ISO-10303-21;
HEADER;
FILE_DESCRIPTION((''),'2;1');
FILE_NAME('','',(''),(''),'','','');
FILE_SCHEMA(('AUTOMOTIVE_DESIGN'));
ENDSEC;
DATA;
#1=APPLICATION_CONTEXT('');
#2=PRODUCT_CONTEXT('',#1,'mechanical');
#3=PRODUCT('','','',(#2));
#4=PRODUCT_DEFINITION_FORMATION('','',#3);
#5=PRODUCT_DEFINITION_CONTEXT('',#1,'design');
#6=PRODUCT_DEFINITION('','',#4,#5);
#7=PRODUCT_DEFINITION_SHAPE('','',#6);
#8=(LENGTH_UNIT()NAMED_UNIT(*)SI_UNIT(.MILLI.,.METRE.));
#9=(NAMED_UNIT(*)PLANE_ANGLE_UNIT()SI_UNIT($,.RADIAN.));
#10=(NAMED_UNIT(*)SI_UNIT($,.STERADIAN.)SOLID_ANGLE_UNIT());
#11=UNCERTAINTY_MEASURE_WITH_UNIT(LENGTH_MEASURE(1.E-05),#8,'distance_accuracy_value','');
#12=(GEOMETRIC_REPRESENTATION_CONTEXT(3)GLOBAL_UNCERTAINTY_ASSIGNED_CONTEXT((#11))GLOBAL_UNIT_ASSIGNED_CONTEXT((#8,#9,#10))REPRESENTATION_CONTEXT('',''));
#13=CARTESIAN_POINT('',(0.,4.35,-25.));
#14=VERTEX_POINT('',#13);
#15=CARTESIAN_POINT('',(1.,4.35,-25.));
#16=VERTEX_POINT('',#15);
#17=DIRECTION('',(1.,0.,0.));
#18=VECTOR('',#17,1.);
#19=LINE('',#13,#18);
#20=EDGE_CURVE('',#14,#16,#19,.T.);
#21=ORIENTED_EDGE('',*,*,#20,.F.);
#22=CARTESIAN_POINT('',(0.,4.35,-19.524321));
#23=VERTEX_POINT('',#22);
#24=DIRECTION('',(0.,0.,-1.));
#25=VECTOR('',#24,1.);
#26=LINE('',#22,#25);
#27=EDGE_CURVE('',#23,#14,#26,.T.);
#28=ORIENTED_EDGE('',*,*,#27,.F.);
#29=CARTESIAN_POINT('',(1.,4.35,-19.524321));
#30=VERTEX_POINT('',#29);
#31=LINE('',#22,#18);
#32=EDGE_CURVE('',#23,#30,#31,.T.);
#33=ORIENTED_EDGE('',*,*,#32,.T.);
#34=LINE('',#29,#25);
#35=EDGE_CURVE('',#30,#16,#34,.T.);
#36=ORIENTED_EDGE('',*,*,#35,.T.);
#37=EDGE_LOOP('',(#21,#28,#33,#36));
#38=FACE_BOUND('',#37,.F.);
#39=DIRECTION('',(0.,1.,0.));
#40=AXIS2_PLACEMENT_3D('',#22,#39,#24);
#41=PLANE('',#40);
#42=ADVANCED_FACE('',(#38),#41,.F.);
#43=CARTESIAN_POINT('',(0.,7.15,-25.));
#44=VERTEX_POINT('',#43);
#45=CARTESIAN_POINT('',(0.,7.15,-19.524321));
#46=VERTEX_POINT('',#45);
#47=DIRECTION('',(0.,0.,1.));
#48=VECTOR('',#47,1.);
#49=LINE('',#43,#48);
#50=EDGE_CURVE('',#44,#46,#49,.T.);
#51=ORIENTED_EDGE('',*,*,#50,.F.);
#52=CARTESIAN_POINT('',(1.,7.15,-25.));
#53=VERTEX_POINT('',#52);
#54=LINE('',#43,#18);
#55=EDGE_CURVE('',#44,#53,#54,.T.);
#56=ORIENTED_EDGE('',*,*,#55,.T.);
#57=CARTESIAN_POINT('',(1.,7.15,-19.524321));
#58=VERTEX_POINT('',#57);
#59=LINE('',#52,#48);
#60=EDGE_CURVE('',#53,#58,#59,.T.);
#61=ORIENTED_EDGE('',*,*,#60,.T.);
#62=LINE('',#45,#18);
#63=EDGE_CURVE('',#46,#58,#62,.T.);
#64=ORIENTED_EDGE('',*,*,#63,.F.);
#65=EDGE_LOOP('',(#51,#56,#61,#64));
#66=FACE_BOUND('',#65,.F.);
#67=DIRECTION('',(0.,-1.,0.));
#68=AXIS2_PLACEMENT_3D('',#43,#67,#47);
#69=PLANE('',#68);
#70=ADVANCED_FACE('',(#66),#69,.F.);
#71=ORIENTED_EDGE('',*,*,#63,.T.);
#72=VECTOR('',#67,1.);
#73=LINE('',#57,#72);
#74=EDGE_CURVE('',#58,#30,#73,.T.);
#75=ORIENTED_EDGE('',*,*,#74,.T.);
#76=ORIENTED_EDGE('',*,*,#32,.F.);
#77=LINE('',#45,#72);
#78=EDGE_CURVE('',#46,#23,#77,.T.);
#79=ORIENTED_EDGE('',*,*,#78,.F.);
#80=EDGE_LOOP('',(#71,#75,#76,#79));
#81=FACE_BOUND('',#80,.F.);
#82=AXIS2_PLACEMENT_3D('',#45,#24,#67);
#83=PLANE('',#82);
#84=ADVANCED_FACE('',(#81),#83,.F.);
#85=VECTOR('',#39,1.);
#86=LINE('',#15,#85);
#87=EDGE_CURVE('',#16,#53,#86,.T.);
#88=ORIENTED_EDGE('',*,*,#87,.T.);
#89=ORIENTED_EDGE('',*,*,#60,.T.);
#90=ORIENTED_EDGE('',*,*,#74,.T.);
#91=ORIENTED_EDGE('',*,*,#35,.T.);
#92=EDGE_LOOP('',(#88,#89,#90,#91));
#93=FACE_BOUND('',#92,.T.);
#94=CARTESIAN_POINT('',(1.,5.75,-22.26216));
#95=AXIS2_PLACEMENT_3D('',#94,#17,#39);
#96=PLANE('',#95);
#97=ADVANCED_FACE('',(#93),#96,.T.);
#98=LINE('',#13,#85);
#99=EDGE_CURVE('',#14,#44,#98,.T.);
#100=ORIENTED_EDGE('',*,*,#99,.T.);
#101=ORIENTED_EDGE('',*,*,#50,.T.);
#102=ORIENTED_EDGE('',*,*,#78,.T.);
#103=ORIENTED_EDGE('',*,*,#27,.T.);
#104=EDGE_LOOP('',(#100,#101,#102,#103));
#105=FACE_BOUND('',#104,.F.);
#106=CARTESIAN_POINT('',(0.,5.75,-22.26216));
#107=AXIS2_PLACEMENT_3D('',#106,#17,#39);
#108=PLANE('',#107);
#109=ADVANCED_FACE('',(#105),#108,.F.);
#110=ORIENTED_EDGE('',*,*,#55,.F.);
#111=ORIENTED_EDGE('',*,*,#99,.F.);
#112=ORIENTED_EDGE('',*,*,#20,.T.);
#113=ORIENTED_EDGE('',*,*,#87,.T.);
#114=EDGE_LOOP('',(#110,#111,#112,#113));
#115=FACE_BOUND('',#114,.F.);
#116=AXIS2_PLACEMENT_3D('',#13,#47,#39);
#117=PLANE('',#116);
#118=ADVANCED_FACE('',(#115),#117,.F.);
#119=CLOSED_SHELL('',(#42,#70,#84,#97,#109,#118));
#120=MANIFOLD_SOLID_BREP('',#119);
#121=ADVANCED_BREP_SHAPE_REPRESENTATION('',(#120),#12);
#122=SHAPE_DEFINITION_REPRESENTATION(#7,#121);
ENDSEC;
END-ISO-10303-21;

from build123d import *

# Parameters (mm, degrees)
F1_DEPTH = 1


# Not quite as in the source:
# - a feature names something its author has since deleted; it is built from what else it names


with BuildPart() as f1:
    # F0 (on Right) → F1 (new body)
    with BuildSketch(Plane.YZ):
        Polygon((4.35, -25), (5.25, -25), (6.25, -25), (7.15, -25), (7.15, -19.52432096), (4.35, -19.52432096), align=None)
    extrude(amount=F1_DEPTH)


solid = f1.part
